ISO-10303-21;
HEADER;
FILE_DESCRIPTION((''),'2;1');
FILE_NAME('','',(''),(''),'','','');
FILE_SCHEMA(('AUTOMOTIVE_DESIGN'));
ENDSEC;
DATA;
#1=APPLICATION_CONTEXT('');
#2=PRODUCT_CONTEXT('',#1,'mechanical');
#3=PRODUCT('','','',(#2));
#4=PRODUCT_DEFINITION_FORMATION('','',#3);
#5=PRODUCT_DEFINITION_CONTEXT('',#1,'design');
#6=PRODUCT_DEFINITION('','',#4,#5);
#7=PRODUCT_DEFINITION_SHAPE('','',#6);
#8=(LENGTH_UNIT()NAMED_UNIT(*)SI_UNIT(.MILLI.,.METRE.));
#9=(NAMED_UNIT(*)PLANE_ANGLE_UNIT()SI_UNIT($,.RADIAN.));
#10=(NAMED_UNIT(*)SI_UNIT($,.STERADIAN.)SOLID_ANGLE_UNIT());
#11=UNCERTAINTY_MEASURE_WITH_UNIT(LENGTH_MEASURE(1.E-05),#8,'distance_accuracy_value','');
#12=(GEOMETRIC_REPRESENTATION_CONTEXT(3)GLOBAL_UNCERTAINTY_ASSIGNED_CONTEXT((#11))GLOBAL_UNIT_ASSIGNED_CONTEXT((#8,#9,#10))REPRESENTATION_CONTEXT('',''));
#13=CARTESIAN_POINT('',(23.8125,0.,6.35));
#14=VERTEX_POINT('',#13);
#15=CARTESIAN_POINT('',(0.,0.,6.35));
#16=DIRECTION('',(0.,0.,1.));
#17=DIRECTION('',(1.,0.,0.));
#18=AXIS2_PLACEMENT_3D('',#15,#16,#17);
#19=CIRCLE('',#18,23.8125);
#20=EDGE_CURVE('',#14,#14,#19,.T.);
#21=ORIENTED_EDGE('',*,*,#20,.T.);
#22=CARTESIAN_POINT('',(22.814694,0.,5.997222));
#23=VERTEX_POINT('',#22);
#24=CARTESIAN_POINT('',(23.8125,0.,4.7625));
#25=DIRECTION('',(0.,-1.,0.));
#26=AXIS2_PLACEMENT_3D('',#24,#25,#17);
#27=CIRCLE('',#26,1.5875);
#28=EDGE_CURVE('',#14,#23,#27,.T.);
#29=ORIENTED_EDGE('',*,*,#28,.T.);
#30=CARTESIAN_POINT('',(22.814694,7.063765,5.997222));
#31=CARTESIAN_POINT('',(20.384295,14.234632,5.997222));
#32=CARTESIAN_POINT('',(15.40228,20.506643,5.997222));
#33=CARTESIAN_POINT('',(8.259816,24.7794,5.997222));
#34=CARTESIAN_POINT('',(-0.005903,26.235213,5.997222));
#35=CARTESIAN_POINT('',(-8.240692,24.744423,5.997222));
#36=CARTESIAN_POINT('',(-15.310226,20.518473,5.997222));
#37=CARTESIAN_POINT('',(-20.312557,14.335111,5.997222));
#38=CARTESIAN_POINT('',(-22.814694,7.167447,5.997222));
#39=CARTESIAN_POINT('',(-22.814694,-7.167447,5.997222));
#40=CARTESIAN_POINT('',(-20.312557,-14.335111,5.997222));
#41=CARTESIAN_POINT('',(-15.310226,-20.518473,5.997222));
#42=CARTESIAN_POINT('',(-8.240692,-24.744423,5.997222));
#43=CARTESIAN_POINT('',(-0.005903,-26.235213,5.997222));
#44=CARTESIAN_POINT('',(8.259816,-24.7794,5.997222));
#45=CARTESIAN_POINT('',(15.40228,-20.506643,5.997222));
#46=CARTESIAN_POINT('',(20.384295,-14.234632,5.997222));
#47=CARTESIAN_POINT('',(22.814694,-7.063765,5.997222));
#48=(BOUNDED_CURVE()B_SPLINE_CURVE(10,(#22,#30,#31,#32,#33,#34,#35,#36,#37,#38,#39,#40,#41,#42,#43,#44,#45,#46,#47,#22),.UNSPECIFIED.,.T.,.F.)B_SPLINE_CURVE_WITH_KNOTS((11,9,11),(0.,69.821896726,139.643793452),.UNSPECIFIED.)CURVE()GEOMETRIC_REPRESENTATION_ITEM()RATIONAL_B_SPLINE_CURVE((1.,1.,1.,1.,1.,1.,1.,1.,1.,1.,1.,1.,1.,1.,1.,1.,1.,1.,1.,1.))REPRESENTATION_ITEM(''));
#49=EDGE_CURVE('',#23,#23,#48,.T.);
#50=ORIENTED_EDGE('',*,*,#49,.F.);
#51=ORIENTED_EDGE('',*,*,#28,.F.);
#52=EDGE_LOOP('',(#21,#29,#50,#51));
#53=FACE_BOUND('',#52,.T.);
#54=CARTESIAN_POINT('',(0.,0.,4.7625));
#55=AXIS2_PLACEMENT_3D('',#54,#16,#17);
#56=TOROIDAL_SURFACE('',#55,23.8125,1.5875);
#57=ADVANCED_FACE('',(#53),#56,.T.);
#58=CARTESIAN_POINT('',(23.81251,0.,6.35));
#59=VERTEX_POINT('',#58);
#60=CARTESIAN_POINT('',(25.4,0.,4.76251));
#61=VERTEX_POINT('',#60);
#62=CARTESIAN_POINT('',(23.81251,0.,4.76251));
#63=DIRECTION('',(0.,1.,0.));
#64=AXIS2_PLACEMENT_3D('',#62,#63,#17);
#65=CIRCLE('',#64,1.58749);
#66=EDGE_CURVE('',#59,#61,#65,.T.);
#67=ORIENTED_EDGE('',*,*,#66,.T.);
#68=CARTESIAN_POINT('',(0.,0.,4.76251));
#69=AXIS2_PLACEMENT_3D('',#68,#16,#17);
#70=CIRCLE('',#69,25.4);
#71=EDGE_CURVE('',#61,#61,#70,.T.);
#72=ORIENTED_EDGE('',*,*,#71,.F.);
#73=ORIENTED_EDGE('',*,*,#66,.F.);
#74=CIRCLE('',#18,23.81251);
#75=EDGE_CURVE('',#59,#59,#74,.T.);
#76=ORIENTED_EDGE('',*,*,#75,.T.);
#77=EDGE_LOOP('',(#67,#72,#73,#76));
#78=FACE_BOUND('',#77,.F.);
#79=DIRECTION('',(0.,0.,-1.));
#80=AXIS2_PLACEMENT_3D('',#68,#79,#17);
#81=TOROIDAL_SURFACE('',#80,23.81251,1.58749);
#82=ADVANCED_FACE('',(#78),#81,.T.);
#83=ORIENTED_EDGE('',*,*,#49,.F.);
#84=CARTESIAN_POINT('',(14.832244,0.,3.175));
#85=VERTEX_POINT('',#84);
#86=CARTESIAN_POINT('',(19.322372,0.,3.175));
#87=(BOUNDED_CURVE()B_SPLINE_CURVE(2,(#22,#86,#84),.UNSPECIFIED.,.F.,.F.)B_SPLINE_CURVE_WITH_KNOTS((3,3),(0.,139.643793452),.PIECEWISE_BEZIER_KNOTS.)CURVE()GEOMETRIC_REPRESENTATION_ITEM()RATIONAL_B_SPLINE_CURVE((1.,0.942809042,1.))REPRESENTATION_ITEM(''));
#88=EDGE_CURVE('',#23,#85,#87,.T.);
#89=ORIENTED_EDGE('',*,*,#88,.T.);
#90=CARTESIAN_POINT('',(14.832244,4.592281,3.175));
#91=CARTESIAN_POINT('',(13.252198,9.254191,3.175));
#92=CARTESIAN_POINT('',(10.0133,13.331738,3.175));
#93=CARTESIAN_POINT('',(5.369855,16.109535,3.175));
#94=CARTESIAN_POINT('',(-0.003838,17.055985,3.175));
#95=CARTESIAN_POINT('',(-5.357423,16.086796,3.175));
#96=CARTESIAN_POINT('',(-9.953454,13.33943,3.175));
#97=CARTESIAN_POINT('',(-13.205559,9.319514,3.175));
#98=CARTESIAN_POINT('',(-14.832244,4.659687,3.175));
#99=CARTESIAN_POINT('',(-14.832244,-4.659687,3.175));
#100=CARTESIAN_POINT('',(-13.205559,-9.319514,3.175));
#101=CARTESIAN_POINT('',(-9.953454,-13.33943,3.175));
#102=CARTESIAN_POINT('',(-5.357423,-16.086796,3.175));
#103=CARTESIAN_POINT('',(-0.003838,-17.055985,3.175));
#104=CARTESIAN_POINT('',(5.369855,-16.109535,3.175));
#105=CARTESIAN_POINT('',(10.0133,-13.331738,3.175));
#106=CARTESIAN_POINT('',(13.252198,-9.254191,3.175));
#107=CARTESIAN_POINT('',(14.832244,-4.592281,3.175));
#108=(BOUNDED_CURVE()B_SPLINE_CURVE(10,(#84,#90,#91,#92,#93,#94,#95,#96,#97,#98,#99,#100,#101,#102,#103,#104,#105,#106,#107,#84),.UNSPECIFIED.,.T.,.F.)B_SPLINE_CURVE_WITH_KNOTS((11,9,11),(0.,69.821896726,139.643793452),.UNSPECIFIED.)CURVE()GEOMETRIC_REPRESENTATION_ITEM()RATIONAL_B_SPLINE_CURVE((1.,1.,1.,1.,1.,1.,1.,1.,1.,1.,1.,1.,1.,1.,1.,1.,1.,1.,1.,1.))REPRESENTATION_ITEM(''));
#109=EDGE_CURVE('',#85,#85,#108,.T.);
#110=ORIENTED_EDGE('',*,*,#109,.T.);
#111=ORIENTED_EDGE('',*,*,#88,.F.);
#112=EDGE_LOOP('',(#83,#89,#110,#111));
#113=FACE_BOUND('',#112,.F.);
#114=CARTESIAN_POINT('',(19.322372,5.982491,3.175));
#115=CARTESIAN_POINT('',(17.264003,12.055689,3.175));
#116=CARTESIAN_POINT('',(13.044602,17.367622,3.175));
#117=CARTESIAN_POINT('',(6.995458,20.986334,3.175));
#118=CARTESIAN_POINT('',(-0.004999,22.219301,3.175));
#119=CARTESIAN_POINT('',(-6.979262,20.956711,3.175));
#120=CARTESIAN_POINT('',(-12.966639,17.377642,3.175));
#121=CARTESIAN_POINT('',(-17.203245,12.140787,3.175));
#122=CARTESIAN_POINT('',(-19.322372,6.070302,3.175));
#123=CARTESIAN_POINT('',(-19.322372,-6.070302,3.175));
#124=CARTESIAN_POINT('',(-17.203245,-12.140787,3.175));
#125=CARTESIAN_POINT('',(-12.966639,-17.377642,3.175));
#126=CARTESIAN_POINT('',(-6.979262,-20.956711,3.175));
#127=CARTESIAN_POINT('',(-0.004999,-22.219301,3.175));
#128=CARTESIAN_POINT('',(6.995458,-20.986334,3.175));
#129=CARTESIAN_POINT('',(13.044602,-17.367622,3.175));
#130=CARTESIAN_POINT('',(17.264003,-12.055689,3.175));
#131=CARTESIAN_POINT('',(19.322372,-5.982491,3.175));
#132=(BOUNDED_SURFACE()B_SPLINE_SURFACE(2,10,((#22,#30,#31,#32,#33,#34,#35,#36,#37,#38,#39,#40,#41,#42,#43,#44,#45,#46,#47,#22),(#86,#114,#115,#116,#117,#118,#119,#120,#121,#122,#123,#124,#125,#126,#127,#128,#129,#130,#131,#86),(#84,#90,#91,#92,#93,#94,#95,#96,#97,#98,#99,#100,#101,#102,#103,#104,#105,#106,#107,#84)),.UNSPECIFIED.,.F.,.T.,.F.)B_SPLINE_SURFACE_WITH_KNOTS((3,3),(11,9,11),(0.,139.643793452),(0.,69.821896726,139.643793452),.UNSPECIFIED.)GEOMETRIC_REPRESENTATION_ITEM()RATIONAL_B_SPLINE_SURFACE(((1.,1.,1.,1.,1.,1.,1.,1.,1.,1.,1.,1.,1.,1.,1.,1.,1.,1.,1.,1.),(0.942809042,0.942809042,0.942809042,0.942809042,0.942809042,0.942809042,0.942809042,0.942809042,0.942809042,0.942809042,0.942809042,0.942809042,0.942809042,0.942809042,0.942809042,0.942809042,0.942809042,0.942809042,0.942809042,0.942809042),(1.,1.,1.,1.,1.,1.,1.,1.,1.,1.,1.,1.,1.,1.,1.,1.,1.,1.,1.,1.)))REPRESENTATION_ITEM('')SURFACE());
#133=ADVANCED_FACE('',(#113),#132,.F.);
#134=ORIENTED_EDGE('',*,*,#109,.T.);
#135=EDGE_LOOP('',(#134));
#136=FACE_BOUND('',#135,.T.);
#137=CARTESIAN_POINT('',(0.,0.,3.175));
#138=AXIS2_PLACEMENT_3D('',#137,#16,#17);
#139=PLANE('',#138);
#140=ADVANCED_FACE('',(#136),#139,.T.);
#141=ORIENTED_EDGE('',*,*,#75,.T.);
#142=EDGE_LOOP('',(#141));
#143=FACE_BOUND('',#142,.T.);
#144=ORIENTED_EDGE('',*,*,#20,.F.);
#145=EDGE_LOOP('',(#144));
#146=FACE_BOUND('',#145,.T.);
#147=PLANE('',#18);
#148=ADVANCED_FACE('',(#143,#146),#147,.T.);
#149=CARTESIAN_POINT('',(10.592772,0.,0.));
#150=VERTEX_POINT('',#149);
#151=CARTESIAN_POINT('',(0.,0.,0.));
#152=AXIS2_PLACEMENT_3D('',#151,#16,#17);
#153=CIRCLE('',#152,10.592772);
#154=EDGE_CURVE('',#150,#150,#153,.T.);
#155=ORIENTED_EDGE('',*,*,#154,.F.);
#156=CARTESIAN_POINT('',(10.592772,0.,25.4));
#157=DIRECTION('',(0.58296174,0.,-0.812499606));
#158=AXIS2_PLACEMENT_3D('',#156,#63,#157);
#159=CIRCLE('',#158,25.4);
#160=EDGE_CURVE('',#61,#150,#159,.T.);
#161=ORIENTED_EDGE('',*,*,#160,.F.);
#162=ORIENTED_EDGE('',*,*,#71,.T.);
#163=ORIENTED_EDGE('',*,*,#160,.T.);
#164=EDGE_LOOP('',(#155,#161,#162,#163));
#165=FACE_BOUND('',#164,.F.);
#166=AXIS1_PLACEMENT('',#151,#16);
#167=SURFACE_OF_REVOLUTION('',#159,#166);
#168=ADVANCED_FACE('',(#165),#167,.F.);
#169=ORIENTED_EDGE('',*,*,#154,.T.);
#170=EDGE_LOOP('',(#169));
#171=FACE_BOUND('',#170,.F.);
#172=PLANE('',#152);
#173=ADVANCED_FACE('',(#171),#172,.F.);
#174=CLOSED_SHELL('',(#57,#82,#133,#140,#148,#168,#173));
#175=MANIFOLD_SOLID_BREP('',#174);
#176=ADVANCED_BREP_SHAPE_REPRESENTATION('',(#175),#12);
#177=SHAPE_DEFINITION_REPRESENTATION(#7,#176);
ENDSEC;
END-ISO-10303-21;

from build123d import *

# Parameters (mm, degrees)
F0_R     = 25.4
F0_R_2   = 22.225
F1_DEPTH = 6.35
F2_DEPTH = 3.175
F3_R     = 1.5875
F4_R     = 1.58749
F5_R     = 12.7


# Not quite as in the source:
# - a fillet or chamfer that OpenCascade refuses, or shapes differently, is made with other operations: its cross-section is extruded or revolved along the edge and cut away or added
# - a fillet or chamfer is up to 0.001 mm smaller than in the source, because OpenCascade refuses the exact size


with BuildPart() as f1:
    # F0 (on Top) → F1 (new body)
    with BuildSketch(Plane.XY):
        Circle(F0_R)
        Circle(F0_R_2, mode=Mode.SUBTRACT)
    extrude(amount=F1_DEPTH)

    # F0 (on Top) → F2 (join)
    with BuildSketch(Plane.XY):
        Circle(F0_R_2)
    extrude(amount=F2_DEPTH)

    # F3
    f3_edges = [f1.edges().sort_by_distance(p)[0] for p in [
        (-22.225, 0, 6.35),
    ]]
    fillet(f3_edges, radius=F3_R)

    # F4 (radius 1.5875 in the source; OpenCascade refuses exactly that, so slightly less here)
    f4_edges = [f1.edges().sort_by_distance(p)[0] for p in [
        (-25.4, 0, 6.35),
    ]]
    fillet(f4_edges, radius=F4_R)

    # F5
    f5_edges = [f1.edges().sort_by_distance(p)[0] for p in [
        (-22.225, 0, 3.175),
    ]]
    fillet(f5_edges, radius=F5_R)

    # F6: fillet of radius 25.4 on 1 edges, made by hand

    # F6_s1 → F6_t2 (revolve, cut)
    with BuildSketch(Plane.XZ):
        with BuildLine():
            ThreePointArc((25.4, 4.76251), (18.3699099141, 1.219923015), (10.5927718158, 0))
            Line((10.5927718158, 0), (10.5927718158, -0.508))
            Line((10.5927718158, -0.508), (25.4, -0.508))
            Line((25.4, -0.508), (25.908, 0))
            ThreePointArc((25.908, 0), (25.908, 2.381255), (25.6961445637, 4.3497602))
            Line((25.6961445637, 4.3497602), (25.4, 4.76251))
        make_face()
    revolve(axis=Axis((0, 0, 0), (0, 0, 1)), mode=Mode.SUBTRACT)


solid = f1.part
